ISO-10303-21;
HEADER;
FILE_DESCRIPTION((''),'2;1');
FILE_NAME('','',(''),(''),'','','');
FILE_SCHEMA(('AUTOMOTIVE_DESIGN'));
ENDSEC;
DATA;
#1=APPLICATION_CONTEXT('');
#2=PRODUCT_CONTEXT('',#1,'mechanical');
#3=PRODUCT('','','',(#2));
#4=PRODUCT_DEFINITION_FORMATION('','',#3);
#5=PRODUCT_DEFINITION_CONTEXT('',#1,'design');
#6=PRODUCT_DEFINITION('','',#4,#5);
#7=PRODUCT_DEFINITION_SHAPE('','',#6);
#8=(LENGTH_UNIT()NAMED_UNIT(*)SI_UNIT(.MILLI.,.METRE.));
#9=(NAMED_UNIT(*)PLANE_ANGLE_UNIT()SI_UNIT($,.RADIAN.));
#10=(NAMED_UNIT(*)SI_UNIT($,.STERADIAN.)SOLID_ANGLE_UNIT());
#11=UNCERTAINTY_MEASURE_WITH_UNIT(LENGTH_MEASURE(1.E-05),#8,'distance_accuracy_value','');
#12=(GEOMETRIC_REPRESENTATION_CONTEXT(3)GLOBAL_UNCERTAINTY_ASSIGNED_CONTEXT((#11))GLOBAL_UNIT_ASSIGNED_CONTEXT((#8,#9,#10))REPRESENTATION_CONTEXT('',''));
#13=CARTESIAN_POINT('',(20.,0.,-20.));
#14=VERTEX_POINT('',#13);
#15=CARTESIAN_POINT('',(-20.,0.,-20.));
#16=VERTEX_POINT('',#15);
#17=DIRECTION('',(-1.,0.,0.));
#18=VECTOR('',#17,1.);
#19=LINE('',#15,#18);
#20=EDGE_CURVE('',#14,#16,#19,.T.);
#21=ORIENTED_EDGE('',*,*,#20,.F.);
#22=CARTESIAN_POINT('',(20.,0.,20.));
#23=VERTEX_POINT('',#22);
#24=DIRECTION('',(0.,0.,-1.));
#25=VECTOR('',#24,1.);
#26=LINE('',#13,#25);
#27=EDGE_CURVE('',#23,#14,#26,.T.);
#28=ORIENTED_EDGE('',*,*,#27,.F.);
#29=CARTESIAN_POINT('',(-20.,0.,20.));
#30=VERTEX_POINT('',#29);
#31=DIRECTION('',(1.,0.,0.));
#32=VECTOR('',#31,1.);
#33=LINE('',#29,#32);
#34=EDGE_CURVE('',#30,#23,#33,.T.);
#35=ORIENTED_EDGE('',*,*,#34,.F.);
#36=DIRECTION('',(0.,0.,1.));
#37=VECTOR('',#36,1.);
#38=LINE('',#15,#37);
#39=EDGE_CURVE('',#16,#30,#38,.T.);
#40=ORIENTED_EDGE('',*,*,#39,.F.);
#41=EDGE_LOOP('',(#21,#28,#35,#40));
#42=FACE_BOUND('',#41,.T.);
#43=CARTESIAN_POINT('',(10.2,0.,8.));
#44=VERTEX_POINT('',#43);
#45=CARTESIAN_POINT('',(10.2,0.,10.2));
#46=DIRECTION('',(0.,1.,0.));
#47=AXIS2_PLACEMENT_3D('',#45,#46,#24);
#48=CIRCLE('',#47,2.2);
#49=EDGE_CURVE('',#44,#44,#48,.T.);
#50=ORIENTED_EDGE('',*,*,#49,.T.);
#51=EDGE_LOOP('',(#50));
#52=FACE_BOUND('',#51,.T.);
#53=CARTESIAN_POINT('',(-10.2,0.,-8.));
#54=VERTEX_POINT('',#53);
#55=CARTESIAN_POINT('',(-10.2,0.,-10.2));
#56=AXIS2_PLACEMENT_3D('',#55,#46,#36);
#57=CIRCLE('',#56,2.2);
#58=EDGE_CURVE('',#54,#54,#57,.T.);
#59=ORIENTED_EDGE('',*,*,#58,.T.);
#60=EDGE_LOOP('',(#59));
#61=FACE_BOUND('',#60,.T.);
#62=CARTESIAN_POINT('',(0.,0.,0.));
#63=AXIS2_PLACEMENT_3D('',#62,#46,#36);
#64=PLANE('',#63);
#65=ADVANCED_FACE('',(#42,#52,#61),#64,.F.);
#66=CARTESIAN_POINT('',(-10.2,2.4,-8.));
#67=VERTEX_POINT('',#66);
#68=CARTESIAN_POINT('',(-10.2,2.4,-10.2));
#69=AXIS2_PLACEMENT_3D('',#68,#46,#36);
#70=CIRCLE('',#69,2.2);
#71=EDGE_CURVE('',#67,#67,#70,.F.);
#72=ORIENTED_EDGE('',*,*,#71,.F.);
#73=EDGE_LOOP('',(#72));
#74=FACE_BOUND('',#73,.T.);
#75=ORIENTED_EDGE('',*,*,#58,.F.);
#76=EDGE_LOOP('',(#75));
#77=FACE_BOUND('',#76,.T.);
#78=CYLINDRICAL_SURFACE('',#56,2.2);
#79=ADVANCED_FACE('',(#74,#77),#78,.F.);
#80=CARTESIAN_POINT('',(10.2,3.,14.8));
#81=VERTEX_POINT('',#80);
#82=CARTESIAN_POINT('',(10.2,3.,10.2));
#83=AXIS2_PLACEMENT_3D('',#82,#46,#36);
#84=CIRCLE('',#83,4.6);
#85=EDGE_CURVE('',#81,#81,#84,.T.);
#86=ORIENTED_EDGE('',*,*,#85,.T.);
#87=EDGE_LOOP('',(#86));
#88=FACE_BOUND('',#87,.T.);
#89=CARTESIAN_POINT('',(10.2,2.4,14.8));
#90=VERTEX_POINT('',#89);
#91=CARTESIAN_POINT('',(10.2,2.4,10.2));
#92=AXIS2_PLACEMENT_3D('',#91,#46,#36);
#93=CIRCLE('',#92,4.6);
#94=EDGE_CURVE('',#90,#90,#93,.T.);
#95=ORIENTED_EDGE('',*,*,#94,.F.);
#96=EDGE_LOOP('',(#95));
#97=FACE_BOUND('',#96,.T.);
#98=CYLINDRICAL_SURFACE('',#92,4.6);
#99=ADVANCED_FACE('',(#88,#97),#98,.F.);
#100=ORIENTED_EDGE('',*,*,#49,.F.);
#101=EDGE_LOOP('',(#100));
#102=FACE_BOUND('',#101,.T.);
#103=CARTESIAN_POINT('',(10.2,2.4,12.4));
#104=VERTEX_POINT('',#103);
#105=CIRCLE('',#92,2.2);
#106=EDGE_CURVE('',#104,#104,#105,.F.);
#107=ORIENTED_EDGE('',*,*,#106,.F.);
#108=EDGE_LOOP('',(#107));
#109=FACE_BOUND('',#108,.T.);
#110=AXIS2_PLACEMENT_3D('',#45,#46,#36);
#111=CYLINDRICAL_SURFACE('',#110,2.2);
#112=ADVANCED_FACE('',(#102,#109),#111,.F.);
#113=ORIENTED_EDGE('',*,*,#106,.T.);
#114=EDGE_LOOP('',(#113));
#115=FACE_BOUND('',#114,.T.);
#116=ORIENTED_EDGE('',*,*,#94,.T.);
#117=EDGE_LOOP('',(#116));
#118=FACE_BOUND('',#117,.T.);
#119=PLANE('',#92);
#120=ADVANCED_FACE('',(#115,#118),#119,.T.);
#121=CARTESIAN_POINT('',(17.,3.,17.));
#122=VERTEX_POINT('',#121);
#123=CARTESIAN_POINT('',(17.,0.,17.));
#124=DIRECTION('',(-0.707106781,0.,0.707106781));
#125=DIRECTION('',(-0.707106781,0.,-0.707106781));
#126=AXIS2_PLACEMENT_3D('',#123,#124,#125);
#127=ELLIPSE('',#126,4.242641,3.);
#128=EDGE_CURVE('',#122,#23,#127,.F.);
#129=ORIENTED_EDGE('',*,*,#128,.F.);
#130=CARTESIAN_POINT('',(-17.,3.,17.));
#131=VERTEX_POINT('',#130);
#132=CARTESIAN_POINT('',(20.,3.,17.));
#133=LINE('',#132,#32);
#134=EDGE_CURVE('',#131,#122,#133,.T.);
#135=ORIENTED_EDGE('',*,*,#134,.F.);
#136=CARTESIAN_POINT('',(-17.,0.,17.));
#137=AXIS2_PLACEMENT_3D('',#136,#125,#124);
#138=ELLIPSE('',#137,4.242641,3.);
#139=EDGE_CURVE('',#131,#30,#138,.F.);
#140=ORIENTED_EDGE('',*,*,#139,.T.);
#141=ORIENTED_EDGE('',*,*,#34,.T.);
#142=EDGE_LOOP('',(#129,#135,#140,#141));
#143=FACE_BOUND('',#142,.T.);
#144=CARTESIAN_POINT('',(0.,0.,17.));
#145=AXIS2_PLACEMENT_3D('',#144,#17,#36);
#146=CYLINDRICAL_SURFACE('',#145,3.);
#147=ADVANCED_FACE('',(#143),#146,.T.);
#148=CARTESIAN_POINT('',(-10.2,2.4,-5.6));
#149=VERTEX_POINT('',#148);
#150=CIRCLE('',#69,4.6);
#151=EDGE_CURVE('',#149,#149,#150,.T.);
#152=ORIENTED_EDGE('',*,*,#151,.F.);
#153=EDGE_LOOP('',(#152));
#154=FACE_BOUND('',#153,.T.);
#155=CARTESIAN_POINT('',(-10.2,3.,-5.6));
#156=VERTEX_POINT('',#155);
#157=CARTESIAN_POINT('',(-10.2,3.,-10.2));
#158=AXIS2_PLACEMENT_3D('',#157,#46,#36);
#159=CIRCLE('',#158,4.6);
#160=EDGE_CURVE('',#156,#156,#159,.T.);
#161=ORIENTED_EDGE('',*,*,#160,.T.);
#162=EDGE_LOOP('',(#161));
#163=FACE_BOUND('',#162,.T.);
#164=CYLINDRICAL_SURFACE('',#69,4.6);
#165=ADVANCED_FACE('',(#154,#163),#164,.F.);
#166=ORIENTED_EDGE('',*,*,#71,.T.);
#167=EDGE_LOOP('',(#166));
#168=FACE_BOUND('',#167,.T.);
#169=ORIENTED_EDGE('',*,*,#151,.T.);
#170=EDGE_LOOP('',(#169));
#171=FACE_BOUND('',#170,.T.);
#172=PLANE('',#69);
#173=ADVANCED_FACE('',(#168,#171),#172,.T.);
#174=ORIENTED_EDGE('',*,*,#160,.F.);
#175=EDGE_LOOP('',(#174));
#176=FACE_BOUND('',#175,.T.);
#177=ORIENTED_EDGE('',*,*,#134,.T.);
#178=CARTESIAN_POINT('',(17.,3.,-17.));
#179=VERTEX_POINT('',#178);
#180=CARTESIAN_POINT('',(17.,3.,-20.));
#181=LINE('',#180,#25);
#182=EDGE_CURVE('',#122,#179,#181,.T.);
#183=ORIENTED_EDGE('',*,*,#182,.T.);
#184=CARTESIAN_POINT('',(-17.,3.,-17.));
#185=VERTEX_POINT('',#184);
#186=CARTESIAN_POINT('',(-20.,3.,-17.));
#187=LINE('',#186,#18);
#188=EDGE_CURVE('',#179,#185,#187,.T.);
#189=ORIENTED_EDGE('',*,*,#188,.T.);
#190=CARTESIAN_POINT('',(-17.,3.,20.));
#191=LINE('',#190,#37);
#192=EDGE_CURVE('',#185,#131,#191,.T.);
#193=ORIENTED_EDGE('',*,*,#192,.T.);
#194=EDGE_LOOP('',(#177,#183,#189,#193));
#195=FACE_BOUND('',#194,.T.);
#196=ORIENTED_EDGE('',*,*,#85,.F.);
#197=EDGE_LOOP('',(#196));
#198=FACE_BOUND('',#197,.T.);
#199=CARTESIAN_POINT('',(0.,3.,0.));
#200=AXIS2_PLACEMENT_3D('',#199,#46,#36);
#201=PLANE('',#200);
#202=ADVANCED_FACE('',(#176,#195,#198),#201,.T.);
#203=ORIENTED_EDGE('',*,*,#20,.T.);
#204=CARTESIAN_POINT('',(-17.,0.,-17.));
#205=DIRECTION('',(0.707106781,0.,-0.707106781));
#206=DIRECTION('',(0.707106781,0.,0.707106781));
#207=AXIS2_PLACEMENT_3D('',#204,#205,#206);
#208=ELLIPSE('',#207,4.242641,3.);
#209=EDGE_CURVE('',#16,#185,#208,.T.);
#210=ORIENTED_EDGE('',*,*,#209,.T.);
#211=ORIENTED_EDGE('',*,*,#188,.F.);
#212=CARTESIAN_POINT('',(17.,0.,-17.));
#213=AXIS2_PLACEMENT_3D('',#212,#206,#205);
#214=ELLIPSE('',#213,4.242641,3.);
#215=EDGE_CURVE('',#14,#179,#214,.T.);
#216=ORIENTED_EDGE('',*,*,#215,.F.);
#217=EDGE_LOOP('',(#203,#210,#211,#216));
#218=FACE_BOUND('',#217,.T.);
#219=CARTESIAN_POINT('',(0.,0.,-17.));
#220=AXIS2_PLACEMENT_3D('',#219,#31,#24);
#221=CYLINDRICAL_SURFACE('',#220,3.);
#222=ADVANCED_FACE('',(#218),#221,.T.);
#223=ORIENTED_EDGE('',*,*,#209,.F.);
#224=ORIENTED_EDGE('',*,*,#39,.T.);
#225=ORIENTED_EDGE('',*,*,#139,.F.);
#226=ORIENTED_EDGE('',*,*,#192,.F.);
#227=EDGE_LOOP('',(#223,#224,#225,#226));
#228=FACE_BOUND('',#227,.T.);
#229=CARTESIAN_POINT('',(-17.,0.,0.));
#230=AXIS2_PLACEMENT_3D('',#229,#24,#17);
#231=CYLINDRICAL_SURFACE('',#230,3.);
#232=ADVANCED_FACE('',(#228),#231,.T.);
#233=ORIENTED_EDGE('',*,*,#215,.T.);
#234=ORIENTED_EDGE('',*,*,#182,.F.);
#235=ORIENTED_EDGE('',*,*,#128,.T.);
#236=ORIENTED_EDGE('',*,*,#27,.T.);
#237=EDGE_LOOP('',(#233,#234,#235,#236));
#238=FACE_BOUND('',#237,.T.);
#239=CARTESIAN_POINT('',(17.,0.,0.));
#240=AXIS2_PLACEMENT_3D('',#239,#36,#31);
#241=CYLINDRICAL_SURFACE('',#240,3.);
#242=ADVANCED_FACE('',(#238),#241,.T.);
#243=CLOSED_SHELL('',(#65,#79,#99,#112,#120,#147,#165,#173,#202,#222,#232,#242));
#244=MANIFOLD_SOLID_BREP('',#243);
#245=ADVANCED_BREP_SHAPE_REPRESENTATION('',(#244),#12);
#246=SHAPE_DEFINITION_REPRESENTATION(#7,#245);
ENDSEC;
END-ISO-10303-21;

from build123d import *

# Parameters (mm, degrees)
SKETCH1_W           = 40
SKETCH1_H           = 40
BOSS_EXTRUDE1_DEPTH = 3
SKETCH2_R           = 2.2
CUT_EXTRUDE1_DEPTH  = 29.442925307
SKETCH3_R           = 4.6
CUT_EXTRUDE2_DEPTH  = 0.6
FILLET1_R           = 3


with BuildPart() as part:
    # Sketch1 → Boss-Extrude1 (new body)
    with BuildSketch(Plane(origin=(0, 0, 0), x_dir=(1, 0, 0), z_dir=(0, 1, 0))):
        Rectangle(SKETCH1_W, SKETCH1_H)
    extrude(amount=BOSS_EXTRUDE1_DEPTH)

    # Sketch2 → Cut-Extrude1 (cut, through all)
    with BuildSketch(Plane(origin=(0, 3, 0), x_dir=(1, 0, 0), z_dir=(0, 1, 0))):
        with Locations(Location((-10.2, 10.2, 0), (0, 0, 270))):
            Circle(SKETCH2_R)
        with Locations(Location((10.2, -10.2, 0), (0, 0, 90))):
            Circle(SKETCH2_R)
    extrude(amount=-CUT_EXTRUDE1_DEPTH, mode=Mode.SUBTRACT)

    # Sketch3 → Cut-Extrude2 (cut)
    with BuildSketch(Plane(origin=(0, 3, 0), x_dir=(1, 0, 0), z_dir=(0, 1, 0))):
        with Locations(Location((-10.2, 10.2, 0), (0, 0, 270))):
            Circle(SKETCH3_R)
        with Locations(Location((10.2, -10.2, 0), (0, 0, 270))):
            Circle(SKETCH3_R)
    extrude(amount=-CUT_EXTRUDE2_DEPTH, mode=Mode.SUBTRACT)

    # Fillet1
    fillet1_edges = [part.edges().sort_by_distance(p)[0] for p in [
        (20, 3, 0),
        (-20, 3, 0),
        (0, 3, 20),
        (0, 3, -20),
    ]]
    fillet(fillet1_edges, radius=FILLET1_R - 0.0001)  # a hair under: the kernel refuses the full size


solid = part.part
